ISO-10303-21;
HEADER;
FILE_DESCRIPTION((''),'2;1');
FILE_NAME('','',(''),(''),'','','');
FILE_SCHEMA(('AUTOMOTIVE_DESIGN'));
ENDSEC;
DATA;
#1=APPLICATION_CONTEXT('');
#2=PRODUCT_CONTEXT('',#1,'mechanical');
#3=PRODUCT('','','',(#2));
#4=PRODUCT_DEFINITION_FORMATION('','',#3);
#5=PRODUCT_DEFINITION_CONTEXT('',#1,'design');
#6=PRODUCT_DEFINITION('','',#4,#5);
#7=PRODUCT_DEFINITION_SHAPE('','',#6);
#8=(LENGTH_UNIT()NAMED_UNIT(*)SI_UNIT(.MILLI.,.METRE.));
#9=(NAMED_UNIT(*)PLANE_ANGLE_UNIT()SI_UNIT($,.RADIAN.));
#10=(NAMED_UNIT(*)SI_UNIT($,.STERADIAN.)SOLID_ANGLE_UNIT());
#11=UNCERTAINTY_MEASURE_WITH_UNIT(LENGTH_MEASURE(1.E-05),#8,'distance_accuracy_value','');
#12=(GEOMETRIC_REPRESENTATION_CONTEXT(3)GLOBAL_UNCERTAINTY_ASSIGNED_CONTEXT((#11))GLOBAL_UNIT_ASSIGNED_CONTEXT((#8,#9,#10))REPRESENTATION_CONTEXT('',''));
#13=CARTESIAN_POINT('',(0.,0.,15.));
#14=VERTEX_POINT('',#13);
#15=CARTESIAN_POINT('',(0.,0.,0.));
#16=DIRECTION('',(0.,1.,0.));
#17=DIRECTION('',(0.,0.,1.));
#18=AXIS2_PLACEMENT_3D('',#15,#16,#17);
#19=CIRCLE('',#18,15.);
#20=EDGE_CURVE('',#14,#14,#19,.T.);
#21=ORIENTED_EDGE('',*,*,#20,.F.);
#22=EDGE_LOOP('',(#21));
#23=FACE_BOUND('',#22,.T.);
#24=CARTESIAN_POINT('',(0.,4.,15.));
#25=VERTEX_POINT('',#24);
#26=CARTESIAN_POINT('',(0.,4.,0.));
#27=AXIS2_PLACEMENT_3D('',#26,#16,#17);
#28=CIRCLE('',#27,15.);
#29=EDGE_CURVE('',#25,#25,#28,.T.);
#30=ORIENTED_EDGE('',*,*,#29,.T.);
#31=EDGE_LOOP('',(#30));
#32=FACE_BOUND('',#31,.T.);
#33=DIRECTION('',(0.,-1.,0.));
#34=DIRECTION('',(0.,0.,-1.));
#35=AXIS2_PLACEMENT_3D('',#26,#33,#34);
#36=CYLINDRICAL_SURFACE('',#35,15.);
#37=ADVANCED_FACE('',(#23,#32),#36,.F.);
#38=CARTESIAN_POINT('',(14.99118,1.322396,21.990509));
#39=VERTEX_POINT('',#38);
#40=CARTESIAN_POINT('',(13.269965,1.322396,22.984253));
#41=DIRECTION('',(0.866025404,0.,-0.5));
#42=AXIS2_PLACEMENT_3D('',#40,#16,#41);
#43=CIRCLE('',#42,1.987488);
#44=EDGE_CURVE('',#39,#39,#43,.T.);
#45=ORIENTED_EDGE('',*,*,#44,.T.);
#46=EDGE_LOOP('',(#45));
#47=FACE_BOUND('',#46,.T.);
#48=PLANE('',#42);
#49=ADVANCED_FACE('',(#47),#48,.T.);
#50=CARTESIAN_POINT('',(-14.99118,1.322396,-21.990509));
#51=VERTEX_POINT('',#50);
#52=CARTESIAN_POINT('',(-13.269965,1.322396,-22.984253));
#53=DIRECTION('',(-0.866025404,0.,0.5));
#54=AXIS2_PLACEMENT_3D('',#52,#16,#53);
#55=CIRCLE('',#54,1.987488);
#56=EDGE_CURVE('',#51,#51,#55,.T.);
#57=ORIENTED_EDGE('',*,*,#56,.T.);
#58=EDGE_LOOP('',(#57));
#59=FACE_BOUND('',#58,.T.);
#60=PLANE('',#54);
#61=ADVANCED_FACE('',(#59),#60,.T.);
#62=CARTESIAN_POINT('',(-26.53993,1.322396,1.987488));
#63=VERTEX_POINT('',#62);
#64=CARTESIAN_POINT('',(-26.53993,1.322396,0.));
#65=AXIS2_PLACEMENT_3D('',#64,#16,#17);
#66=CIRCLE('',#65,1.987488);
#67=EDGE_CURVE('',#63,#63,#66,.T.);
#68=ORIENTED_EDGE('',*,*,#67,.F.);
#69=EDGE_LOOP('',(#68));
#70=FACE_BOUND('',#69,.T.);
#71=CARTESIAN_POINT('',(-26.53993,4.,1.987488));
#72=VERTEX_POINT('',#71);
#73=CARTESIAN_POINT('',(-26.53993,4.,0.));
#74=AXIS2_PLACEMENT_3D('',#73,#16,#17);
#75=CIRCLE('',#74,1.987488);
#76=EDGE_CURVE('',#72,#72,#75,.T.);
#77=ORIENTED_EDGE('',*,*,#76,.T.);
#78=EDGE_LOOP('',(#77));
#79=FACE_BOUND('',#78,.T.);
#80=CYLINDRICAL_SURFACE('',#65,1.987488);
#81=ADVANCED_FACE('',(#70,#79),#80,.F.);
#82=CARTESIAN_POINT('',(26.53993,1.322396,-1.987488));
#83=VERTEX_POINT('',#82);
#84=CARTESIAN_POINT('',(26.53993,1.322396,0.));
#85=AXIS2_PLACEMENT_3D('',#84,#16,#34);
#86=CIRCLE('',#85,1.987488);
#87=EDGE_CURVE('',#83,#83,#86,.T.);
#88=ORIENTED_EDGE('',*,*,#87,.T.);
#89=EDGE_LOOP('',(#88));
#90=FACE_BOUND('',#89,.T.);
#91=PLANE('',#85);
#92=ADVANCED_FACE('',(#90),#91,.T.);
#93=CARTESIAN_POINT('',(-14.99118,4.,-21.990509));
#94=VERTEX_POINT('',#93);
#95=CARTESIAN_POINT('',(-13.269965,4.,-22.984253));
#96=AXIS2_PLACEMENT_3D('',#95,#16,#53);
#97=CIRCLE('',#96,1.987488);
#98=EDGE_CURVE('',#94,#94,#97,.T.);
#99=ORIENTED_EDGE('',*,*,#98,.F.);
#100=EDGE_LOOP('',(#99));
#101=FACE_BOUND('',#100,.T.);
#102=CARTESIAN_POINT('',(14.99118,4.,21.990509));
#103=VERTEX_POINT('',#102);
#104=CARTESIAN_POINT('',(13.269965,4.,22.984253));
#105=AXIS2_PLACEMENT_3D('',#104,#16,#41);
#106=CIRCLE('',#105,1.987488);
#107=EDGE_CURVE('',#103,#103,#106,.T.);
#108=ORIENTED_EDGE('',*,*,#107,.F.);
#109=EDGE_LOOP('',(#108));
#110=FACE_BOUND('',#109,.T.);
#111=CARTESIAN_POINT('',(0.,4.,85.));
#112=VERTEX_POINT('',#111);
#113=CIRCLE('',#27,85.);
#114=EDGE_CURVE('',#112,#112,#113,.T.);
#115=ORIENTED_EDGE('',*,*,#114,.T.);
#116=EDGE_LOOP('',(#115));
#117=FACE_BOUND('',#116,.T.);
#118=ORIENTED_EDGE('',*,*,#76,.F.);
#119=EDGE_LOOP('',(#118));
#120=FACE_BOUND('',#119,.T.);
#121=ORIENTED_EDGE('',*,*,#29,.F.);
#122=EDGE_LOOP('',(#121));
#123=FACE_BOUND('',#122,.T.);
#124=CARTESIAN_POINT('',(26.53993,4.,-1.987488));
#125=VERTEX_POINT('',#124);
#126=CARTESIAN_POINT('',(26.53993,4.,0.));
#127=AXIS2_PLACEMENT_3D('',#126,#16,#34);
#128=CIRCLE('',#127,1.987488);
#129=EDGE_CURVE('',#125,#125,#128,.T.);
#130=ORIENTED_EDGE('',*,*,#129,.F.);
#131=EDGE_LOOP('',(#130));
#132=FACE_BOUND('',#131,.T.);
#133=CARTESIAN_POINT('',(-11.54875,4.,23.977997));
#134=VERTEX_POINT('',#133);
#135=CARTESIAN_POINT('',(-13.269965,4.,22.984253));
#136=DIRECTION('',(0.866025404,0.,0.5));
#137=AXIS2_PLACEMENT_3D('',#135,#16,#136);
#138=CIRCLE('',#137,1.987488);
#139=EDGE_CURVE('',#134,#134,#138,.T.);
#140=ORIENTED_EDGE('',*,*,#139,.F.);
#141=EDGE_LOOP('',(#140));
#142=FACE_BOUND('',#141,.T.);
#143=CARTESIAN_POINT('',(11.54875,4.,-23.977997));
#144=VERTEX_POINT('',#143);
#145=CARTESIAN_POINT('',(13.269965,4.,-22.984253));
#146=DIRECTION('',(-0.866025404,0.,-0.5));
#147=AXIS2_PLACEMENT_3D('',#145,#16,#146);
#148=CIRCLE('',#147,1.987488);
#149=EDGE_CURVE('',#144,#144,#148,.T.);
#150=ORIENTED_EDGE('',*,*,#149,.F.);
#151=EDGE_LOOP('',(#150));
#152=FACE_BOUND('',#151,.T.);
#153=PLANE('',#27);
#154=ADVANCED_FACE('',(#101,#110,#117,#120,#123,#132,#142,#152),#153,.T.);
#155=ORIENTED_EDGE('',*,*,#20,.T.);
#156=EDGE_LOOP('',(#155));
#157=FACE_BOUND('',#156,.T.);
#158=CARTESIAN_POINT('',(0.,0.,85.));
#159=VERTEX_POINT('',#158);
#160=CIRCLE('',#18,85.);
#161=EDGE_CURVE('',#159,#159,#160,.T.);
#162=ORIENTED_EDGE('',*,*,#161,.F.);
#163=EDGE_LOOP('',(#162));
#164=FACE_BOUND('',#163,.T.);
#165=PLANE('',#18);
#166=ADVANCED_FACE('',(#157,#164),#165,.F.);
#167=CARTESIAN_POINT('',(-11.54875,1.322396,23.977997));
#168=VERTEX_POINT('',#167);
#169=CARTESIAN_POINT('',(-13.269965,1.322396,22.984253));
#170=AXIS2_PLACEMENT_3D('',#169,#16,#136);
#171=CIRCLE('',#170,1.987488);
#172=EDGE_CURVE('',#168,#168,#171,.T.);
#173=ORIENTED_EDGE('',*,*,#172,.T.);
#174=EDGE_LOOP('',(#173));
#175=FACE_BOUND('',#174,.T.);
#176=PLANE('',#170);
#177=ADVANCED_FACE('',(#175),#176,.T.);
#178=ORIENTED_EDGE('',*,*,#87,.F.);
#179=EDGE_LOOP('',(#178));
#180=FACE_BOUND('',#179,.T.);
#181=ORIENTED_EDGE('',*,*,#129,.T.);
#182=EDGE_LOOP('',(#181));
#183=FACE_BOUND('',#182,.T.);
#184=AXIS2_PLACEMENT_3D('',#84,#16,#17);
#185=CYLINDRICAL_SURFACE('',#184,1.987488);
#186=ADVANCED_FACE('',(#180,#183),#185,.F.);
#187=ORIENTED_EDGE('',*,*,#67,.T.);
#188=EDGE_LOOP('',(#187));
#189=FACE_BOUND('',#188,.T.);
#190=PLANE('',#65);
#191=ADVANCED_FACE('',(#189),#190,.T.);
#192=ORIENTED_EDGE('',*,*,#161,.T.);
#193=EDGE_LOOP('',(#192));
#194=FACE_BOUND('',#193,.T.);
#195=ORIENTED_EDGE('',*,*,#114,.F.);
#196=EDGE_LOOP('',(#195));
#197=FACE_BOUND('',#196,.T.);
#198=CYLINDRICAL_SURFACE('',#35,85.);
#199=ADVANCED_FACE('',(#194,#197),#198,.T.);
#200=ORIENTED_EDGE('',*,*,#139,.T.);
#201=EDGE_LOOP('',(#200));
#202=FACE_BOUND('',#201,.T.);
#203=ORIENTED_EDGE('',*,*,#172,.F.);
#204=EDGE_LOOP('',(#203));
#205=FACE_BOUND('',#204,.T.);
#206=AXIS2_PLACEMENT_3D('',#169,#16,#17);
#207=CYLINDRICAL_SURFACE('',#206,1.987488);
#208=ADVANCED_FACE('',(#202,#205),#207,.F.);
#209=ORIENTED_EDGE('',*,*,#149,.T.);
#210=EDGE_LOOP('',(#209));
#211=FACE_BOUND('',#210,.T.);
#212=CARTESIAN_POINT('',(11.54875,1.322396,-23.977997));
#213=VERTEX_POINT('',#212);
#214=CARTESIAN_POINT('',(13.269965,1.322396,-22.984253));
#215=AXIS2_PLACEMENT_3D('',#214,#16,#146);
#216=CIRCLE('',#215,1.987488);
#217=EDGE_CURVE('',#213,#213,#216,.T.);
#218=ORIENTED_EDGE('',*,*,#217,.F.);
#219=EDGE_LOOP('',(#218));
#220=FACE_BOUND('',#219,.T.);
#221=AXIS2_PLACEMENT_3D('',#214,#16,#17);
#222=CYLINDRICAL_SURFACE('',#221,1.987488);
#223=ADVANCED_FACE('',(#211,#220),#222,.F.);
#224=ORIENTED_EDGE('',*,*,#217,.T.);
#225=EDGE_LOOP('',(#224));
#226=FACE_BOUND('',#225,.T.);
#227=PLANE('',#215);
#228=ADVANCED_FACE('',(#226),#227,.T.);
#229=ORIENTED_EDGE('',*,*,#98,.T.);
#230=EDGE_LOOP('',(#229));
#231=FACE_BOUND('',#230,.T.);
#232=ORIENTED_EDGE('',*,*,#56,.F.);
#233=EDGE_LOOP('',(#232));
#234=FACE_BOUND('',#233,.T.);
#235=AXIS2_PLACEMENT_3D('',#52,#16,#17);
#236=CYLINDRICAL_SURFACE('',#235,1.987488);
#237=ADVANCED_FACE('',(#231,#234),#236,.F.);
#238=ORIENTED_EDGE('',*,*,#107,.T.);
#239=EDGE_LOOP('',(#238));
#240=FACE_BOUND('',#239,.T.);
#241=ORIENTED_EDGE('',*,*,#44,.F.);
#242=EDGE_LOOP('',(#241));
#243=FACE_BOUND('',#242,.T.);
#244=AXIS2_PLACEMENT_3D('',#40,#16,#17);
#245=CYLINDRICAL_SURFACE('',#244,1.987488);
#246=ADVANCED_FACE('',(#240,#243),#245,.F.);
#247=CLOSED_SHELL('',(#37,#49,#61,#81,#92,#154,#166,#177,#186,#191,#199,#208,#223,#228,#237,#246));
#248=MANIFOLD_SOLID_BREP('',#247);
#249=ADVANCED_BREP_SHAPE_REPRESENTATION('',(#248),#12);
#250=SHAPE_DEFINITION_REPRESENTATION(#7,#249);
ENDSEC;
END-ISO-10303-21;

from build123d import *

# Parameters (mm, degrees)
SKETCH1_R           = 85
BOSS_EXTRUDE1_DEPTH = 4
SKETCH2_R           = 15
CUT_EXTRUDE1_DEPTH  = 121.274685616
SKETCH3_R           = 1.987487824
CUT_EXTRUDE2_DEPTH  = 2.677604017
CIRPATTERN1_COUNT   = 6


with BuildPart() as part:
    # Sketch1 → Boss-Extrude1 (new body)
    with BuildSketch(Plane(origin=(0, 0, 0), x_dir=(1, 0, 0), z_dir=(0, 1, 0))):
        Circle(SKETCH1_R)
    extrude(amount=BOSS_EXTRUDE1_DEPTH)

    # Sketch2 → Cut-Extrude1 (cut, through all)
    with BuildSketch(Plane(origin=(0, 0, 0), x_dir=(1, 0, 0), z_dir=(0, 1, 0))):
        Circle(SKETCH2_R)
    extrude(amount=CUT_EXTRUDE1_DEPTH, mode=Mode.SUBTRACT)

    # Sketch3 → Cut-Extrude2 (cut)
    with BuildSketch(Plane(origin=(0, 4, 0), x_dir=(1, 0, 0), z_dir=(0, 1, 0))):
        with Locations((-26.539929768, 0)):
            Circle(SKETCH3_R)
    cut_extrude2 = extrude(amount=-CUT_EXTRUDE2_DEPTH, mode=Mode.SUBTRACT)

    # CirPattern1: Cut-Extrude2 ×6 about axis
    cirpattern1_axis = Axis((0, 0, 0), (0, 1, 0))
    for i in range(1, CIRPATTERN1_COUNT):
        add(cut_extrude2.rotate(cirpattern1_axis, i * 360 / CIRPATTERN1_COUNT), mode=Mode.SUBTRACT)


solid = part.part
